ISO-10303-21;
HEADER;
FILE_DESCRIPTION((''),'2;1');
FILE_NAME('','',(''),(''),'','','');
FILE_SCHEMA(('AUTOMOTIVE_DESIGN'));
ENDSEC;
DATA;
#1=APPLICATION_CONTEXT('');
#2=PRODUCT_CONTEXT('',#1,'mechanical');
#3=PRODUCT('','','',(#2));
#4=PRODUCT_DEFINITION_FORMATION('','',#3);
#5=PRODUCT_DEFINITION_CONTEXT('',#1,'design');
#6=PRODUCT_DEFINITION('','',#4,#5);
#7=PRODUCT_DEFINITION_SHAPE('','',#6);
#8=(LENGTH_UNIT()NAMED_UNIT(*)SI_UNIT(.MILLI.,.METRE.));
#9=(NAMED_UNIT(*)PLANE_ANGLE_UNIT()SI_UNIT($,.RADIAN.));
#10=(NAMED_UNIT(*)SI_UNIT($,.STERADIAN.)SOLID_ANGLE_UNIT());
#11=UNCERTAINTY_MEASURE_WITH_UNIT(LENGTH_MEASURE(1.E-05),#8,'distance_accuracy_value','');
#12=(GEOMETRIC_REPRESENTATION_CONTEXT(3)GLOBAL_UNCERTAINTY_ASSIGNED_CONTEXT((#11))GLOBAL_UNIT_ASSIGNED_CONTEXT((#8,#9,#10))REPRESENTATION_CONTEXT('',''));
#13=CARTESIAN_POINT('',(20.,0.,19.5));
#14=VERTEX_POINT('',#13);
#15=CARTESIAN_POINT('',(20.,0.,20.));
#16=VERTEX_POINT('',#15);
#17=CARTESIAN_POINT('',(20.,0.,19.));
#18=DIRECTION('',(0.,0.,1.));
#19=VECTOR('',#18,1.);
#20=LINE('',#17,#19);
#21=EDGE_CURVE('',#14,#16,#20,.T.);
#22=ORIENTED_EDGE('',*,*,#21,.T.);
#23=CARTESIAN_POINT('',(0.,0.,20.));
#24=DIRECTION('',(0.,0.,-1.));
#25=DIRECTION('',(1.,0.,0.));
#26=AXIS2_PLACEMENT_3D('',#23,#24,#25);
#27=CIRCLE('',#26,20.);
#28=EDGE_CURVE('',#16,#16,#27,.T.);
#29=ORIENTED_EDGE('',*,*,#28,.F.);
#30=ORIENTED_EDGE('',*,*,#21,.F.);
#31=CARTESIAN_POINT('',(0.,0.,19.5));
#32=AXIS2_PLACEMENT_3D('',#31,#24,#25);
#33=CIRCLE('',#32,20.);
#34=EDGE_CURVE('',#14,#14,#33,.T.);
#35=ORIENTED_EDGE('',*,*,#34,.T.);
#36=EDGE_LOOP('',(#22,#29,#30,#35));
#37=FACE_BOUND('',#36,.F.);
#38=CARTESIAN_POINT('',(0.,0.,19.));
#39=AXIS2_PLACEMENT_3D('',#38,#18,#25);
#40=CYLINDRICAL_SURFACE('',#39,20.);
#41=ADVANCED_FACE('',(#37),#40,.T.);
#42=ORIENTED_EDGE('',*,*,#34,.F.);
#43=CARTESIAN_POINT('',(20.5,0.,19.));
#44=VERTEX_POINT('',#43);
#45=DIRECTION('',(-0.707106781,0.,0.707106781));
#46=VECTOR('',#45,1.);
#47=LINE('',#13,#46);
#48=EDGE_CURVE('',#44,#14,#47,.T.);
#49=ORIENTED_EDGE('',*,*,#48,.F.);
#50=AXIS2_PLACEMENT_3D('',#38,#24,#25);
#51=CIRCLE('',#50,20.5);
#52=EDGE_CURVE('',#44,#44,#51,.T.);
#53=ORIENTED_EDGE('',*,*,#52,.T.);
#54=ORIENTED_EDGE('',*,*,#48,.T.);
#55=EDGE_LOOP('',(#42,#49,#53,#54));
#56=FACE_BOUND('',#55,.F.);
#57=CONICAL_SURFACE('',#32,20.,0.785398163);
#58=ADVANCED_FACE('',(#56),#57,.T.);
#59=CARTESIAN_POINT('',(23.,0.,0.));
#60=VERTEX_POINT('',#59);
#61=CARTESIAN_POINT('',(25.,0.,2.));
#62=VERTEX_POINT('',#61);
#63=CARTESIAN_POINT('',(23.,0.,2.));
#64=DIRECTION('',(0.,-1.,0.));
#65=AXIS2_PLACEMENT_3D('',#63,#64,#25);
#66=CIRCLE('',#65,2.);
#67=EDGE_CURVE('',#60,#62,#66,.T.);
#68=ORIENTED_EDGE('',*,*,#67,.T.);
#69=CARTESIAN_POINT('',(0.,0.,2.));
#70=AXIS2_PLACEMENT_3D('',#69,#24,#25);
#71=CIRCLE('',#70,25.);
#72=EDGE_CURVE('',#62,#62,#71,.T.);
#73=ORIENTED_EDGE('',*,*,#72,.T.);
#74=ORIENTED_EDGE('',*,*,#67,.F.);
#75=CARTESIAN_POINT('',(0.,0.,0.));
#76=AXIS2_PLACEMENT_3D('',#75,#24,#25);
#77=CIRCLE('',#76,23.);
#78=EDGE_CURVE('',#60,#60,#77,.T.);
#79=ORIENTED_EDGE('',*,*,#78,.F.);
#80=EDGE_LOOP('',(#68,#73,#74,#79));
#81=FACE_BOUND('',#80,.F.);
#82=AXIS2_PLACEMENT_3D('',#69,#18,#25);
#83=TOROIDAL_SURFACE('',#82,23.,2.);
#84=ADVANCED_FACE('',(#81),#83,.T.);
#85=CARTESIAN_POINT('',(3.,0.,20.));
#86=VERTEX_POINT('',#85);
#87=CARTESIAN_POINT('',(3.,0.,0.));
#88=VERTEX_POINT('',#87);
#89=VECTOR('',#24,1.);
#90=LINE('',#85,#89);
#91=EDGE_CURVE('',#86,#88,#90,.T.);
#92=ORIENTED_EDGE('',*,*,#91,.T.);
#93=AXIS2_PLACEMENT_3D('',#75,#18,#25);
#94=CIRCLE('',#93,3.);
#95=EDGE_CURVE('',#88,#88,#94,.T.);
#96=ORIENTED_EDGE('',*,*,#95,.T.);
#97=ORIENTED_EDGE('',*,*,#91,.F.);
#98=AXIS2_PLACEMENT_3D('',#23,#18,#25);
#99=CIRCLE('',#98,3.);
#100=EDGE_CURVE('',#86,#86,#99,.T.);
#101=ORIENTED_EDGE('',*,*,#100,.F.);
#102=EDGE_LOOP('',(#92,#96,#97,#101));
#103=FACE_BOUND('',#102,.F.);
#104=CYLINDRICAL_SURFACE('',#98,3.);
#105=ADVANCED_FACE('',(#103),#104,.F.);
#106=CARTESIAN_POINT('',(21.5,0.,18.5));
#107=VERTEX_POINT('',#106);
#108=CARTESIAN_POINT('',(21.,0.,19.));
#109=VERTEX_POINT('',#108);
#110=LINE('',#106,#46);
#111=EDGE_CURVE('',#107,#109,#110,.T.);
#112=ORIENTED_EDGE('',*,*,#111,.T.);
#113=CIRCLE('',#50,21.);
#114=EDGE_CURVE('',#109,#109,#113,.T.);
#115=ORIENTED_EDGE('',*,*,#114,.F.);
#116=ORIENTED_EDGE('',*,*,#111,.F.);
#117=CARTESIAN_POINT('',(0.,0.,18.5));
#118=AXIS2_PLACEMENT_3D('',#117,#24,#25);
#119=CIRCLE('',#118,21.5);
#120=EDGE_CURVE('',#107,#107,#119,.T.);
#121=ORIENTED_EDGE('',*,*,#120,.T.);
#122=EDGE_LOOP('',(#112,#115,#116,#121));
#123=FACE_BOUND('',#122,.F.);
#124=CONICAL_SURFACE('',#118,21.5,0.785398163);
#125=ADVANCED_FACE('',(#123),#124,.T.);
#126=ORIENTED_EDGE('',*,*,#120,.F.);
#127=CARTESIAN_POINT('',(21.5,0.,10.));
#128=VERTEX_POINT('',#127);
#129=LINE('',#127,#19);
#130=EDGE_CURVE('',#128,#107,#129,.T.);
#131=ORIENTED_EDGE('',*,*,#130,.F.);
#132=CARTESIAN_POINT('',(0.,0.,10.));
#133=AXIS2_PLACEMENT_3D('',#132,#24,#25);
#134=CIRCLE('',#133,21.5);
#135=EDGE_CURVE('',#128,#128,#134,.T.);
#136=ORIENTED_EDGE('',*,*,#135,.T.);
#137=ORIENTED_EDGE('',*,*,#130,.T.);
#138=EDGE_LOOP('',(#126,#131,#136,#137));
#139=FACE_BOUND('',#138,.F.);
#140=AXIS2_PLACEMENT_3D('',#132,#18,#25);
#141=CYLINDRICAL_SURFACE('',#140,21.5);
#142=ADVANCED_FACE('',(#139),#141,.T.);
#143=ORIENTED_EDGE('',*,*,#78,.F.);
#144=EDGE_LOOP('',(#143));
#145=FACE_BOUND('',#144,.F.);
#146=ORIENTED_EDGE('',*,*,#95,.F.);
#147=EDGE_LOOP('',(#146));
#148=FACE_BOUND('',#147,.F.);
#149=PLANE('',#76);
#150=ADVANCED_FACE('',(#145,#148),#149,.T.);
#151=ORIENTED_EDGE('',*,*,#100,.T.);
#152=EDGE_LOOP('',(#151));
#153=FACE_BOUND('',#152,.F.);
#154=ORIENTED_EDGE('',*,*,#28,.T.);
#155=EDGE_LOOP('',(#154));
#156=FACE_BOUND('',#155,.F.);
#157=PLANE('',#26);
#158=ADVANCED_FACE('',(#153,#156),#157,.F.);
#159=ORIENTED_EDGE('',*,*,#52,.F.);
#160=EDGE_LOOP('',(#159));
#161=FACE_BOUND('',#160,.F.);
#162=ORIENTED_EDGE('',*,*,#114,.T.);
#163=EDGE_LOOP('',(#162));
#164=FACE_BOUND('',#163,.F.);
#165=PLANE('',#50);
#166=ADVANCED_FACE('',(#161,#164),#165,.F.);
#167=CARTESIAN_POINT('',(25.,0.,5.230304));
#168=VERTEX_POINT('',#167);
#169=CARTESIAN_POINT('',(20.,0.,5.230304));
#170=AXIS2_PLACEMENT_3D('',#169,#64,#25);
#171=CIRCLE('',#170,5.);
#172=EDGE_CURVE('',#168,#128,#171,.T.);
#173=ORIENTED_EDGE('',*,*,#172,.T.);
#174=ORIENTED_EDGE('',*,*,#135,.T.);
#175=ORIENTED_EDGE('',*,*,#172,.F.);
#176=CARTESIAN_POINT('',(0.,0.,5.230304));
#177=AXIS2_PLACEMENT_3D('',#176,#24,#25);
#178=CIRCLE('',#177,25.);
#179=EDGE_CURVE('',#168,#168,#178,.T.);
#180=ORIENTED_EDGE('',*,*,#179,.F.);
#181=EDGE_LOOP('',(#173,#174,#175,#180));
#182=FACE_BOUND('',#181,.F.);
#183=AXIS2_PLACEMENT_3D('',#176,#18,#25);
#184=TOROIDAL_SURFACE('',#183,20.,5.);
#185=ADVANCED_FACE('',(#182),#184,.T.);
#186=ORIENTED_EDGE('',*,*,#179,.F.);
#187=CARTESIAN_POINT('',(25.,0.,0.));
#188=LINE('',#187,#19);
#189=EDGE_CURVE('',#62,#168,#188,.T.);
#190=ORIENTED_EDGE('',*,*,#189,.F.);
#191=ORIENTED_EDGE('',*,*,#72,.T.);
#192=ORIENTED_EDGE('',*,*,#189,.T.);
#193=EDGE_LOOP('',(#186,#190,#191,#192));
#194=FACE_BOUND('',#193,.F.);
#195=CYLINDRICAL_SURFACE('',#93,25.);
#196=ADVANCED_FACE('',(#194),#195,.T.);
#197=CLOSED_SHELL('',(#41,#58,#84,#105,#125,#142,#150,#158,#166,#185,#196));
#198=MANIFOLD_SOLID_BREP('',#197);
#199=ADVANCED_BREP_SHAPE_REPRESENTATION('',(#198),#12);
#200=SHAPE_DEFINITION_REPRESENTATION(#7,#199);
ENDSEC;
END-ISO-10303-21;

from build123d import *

# Parameters (mm, degrees)
F3_R     = 2
F4_SIZE  = 0.5
F5_R     = 3
F6_DEPTH = 20.001


# Not quite as in the source:
# - a fillet or chamfer that OpenCascade refuses, or shapes differently, is made with other operations: its cross-section is extruded or revolved along the edge and cut away or added


with BuildPart() as f1:
    # F0 (on Front) → F1 (revolve)
    with BuildSketch(Plane.XZ):
        Polygon((0, 20), (0, 0), (25, 0), (25, 10), (21.5, 10), (21.5, 19), (20, 19), (20, 20), align=None)
    revolve(axis=Axis((0, 0, 11.1239180034), (0, 0, -1)))

    # F2: fillet of radius 5 on 1 edges, made by hand

    # F2_s1 → F2_t2 (revolve, cut)
    with BuildSketch(Plane.XZ):
        with BuildLine():
            ThreePointArc((25, 5.2303039929), (24.0311288741, 8.1883438845), (21.5, 10))
            Line((21.5, 10), (25, 10))
            Line((25, 10), (25, 5.2303039929))
        make_face()
    revolve(axis=Axis((0, 0, 10), (0, 0, -1)), mode=Mode.SUBTRACT)

    # F3
    f3_edges = [f1.edges().sort_by_distance(p)[0] for p in [
        (-25, 0, 0),
    ]]
    fillet(f3_edges, radius=F3_R)

    # F4
    f4_edges = [f1.edges().sort_by_distance(p)[0] for p in [
        (-21.5, 0, 19),
        (-20, 0, 19),
    ]]
    chamfer(f4_edges, length=F4_SIZE)

    # F5 (on face) → F6 (cut, through all)
    with BuildSketch(Plane.XY.offset(20)):
        Circle(F5_R)
    extrude(amount=-F6_DEPTH, mode=Mode.SUBTRACT)


solid = f1.part
